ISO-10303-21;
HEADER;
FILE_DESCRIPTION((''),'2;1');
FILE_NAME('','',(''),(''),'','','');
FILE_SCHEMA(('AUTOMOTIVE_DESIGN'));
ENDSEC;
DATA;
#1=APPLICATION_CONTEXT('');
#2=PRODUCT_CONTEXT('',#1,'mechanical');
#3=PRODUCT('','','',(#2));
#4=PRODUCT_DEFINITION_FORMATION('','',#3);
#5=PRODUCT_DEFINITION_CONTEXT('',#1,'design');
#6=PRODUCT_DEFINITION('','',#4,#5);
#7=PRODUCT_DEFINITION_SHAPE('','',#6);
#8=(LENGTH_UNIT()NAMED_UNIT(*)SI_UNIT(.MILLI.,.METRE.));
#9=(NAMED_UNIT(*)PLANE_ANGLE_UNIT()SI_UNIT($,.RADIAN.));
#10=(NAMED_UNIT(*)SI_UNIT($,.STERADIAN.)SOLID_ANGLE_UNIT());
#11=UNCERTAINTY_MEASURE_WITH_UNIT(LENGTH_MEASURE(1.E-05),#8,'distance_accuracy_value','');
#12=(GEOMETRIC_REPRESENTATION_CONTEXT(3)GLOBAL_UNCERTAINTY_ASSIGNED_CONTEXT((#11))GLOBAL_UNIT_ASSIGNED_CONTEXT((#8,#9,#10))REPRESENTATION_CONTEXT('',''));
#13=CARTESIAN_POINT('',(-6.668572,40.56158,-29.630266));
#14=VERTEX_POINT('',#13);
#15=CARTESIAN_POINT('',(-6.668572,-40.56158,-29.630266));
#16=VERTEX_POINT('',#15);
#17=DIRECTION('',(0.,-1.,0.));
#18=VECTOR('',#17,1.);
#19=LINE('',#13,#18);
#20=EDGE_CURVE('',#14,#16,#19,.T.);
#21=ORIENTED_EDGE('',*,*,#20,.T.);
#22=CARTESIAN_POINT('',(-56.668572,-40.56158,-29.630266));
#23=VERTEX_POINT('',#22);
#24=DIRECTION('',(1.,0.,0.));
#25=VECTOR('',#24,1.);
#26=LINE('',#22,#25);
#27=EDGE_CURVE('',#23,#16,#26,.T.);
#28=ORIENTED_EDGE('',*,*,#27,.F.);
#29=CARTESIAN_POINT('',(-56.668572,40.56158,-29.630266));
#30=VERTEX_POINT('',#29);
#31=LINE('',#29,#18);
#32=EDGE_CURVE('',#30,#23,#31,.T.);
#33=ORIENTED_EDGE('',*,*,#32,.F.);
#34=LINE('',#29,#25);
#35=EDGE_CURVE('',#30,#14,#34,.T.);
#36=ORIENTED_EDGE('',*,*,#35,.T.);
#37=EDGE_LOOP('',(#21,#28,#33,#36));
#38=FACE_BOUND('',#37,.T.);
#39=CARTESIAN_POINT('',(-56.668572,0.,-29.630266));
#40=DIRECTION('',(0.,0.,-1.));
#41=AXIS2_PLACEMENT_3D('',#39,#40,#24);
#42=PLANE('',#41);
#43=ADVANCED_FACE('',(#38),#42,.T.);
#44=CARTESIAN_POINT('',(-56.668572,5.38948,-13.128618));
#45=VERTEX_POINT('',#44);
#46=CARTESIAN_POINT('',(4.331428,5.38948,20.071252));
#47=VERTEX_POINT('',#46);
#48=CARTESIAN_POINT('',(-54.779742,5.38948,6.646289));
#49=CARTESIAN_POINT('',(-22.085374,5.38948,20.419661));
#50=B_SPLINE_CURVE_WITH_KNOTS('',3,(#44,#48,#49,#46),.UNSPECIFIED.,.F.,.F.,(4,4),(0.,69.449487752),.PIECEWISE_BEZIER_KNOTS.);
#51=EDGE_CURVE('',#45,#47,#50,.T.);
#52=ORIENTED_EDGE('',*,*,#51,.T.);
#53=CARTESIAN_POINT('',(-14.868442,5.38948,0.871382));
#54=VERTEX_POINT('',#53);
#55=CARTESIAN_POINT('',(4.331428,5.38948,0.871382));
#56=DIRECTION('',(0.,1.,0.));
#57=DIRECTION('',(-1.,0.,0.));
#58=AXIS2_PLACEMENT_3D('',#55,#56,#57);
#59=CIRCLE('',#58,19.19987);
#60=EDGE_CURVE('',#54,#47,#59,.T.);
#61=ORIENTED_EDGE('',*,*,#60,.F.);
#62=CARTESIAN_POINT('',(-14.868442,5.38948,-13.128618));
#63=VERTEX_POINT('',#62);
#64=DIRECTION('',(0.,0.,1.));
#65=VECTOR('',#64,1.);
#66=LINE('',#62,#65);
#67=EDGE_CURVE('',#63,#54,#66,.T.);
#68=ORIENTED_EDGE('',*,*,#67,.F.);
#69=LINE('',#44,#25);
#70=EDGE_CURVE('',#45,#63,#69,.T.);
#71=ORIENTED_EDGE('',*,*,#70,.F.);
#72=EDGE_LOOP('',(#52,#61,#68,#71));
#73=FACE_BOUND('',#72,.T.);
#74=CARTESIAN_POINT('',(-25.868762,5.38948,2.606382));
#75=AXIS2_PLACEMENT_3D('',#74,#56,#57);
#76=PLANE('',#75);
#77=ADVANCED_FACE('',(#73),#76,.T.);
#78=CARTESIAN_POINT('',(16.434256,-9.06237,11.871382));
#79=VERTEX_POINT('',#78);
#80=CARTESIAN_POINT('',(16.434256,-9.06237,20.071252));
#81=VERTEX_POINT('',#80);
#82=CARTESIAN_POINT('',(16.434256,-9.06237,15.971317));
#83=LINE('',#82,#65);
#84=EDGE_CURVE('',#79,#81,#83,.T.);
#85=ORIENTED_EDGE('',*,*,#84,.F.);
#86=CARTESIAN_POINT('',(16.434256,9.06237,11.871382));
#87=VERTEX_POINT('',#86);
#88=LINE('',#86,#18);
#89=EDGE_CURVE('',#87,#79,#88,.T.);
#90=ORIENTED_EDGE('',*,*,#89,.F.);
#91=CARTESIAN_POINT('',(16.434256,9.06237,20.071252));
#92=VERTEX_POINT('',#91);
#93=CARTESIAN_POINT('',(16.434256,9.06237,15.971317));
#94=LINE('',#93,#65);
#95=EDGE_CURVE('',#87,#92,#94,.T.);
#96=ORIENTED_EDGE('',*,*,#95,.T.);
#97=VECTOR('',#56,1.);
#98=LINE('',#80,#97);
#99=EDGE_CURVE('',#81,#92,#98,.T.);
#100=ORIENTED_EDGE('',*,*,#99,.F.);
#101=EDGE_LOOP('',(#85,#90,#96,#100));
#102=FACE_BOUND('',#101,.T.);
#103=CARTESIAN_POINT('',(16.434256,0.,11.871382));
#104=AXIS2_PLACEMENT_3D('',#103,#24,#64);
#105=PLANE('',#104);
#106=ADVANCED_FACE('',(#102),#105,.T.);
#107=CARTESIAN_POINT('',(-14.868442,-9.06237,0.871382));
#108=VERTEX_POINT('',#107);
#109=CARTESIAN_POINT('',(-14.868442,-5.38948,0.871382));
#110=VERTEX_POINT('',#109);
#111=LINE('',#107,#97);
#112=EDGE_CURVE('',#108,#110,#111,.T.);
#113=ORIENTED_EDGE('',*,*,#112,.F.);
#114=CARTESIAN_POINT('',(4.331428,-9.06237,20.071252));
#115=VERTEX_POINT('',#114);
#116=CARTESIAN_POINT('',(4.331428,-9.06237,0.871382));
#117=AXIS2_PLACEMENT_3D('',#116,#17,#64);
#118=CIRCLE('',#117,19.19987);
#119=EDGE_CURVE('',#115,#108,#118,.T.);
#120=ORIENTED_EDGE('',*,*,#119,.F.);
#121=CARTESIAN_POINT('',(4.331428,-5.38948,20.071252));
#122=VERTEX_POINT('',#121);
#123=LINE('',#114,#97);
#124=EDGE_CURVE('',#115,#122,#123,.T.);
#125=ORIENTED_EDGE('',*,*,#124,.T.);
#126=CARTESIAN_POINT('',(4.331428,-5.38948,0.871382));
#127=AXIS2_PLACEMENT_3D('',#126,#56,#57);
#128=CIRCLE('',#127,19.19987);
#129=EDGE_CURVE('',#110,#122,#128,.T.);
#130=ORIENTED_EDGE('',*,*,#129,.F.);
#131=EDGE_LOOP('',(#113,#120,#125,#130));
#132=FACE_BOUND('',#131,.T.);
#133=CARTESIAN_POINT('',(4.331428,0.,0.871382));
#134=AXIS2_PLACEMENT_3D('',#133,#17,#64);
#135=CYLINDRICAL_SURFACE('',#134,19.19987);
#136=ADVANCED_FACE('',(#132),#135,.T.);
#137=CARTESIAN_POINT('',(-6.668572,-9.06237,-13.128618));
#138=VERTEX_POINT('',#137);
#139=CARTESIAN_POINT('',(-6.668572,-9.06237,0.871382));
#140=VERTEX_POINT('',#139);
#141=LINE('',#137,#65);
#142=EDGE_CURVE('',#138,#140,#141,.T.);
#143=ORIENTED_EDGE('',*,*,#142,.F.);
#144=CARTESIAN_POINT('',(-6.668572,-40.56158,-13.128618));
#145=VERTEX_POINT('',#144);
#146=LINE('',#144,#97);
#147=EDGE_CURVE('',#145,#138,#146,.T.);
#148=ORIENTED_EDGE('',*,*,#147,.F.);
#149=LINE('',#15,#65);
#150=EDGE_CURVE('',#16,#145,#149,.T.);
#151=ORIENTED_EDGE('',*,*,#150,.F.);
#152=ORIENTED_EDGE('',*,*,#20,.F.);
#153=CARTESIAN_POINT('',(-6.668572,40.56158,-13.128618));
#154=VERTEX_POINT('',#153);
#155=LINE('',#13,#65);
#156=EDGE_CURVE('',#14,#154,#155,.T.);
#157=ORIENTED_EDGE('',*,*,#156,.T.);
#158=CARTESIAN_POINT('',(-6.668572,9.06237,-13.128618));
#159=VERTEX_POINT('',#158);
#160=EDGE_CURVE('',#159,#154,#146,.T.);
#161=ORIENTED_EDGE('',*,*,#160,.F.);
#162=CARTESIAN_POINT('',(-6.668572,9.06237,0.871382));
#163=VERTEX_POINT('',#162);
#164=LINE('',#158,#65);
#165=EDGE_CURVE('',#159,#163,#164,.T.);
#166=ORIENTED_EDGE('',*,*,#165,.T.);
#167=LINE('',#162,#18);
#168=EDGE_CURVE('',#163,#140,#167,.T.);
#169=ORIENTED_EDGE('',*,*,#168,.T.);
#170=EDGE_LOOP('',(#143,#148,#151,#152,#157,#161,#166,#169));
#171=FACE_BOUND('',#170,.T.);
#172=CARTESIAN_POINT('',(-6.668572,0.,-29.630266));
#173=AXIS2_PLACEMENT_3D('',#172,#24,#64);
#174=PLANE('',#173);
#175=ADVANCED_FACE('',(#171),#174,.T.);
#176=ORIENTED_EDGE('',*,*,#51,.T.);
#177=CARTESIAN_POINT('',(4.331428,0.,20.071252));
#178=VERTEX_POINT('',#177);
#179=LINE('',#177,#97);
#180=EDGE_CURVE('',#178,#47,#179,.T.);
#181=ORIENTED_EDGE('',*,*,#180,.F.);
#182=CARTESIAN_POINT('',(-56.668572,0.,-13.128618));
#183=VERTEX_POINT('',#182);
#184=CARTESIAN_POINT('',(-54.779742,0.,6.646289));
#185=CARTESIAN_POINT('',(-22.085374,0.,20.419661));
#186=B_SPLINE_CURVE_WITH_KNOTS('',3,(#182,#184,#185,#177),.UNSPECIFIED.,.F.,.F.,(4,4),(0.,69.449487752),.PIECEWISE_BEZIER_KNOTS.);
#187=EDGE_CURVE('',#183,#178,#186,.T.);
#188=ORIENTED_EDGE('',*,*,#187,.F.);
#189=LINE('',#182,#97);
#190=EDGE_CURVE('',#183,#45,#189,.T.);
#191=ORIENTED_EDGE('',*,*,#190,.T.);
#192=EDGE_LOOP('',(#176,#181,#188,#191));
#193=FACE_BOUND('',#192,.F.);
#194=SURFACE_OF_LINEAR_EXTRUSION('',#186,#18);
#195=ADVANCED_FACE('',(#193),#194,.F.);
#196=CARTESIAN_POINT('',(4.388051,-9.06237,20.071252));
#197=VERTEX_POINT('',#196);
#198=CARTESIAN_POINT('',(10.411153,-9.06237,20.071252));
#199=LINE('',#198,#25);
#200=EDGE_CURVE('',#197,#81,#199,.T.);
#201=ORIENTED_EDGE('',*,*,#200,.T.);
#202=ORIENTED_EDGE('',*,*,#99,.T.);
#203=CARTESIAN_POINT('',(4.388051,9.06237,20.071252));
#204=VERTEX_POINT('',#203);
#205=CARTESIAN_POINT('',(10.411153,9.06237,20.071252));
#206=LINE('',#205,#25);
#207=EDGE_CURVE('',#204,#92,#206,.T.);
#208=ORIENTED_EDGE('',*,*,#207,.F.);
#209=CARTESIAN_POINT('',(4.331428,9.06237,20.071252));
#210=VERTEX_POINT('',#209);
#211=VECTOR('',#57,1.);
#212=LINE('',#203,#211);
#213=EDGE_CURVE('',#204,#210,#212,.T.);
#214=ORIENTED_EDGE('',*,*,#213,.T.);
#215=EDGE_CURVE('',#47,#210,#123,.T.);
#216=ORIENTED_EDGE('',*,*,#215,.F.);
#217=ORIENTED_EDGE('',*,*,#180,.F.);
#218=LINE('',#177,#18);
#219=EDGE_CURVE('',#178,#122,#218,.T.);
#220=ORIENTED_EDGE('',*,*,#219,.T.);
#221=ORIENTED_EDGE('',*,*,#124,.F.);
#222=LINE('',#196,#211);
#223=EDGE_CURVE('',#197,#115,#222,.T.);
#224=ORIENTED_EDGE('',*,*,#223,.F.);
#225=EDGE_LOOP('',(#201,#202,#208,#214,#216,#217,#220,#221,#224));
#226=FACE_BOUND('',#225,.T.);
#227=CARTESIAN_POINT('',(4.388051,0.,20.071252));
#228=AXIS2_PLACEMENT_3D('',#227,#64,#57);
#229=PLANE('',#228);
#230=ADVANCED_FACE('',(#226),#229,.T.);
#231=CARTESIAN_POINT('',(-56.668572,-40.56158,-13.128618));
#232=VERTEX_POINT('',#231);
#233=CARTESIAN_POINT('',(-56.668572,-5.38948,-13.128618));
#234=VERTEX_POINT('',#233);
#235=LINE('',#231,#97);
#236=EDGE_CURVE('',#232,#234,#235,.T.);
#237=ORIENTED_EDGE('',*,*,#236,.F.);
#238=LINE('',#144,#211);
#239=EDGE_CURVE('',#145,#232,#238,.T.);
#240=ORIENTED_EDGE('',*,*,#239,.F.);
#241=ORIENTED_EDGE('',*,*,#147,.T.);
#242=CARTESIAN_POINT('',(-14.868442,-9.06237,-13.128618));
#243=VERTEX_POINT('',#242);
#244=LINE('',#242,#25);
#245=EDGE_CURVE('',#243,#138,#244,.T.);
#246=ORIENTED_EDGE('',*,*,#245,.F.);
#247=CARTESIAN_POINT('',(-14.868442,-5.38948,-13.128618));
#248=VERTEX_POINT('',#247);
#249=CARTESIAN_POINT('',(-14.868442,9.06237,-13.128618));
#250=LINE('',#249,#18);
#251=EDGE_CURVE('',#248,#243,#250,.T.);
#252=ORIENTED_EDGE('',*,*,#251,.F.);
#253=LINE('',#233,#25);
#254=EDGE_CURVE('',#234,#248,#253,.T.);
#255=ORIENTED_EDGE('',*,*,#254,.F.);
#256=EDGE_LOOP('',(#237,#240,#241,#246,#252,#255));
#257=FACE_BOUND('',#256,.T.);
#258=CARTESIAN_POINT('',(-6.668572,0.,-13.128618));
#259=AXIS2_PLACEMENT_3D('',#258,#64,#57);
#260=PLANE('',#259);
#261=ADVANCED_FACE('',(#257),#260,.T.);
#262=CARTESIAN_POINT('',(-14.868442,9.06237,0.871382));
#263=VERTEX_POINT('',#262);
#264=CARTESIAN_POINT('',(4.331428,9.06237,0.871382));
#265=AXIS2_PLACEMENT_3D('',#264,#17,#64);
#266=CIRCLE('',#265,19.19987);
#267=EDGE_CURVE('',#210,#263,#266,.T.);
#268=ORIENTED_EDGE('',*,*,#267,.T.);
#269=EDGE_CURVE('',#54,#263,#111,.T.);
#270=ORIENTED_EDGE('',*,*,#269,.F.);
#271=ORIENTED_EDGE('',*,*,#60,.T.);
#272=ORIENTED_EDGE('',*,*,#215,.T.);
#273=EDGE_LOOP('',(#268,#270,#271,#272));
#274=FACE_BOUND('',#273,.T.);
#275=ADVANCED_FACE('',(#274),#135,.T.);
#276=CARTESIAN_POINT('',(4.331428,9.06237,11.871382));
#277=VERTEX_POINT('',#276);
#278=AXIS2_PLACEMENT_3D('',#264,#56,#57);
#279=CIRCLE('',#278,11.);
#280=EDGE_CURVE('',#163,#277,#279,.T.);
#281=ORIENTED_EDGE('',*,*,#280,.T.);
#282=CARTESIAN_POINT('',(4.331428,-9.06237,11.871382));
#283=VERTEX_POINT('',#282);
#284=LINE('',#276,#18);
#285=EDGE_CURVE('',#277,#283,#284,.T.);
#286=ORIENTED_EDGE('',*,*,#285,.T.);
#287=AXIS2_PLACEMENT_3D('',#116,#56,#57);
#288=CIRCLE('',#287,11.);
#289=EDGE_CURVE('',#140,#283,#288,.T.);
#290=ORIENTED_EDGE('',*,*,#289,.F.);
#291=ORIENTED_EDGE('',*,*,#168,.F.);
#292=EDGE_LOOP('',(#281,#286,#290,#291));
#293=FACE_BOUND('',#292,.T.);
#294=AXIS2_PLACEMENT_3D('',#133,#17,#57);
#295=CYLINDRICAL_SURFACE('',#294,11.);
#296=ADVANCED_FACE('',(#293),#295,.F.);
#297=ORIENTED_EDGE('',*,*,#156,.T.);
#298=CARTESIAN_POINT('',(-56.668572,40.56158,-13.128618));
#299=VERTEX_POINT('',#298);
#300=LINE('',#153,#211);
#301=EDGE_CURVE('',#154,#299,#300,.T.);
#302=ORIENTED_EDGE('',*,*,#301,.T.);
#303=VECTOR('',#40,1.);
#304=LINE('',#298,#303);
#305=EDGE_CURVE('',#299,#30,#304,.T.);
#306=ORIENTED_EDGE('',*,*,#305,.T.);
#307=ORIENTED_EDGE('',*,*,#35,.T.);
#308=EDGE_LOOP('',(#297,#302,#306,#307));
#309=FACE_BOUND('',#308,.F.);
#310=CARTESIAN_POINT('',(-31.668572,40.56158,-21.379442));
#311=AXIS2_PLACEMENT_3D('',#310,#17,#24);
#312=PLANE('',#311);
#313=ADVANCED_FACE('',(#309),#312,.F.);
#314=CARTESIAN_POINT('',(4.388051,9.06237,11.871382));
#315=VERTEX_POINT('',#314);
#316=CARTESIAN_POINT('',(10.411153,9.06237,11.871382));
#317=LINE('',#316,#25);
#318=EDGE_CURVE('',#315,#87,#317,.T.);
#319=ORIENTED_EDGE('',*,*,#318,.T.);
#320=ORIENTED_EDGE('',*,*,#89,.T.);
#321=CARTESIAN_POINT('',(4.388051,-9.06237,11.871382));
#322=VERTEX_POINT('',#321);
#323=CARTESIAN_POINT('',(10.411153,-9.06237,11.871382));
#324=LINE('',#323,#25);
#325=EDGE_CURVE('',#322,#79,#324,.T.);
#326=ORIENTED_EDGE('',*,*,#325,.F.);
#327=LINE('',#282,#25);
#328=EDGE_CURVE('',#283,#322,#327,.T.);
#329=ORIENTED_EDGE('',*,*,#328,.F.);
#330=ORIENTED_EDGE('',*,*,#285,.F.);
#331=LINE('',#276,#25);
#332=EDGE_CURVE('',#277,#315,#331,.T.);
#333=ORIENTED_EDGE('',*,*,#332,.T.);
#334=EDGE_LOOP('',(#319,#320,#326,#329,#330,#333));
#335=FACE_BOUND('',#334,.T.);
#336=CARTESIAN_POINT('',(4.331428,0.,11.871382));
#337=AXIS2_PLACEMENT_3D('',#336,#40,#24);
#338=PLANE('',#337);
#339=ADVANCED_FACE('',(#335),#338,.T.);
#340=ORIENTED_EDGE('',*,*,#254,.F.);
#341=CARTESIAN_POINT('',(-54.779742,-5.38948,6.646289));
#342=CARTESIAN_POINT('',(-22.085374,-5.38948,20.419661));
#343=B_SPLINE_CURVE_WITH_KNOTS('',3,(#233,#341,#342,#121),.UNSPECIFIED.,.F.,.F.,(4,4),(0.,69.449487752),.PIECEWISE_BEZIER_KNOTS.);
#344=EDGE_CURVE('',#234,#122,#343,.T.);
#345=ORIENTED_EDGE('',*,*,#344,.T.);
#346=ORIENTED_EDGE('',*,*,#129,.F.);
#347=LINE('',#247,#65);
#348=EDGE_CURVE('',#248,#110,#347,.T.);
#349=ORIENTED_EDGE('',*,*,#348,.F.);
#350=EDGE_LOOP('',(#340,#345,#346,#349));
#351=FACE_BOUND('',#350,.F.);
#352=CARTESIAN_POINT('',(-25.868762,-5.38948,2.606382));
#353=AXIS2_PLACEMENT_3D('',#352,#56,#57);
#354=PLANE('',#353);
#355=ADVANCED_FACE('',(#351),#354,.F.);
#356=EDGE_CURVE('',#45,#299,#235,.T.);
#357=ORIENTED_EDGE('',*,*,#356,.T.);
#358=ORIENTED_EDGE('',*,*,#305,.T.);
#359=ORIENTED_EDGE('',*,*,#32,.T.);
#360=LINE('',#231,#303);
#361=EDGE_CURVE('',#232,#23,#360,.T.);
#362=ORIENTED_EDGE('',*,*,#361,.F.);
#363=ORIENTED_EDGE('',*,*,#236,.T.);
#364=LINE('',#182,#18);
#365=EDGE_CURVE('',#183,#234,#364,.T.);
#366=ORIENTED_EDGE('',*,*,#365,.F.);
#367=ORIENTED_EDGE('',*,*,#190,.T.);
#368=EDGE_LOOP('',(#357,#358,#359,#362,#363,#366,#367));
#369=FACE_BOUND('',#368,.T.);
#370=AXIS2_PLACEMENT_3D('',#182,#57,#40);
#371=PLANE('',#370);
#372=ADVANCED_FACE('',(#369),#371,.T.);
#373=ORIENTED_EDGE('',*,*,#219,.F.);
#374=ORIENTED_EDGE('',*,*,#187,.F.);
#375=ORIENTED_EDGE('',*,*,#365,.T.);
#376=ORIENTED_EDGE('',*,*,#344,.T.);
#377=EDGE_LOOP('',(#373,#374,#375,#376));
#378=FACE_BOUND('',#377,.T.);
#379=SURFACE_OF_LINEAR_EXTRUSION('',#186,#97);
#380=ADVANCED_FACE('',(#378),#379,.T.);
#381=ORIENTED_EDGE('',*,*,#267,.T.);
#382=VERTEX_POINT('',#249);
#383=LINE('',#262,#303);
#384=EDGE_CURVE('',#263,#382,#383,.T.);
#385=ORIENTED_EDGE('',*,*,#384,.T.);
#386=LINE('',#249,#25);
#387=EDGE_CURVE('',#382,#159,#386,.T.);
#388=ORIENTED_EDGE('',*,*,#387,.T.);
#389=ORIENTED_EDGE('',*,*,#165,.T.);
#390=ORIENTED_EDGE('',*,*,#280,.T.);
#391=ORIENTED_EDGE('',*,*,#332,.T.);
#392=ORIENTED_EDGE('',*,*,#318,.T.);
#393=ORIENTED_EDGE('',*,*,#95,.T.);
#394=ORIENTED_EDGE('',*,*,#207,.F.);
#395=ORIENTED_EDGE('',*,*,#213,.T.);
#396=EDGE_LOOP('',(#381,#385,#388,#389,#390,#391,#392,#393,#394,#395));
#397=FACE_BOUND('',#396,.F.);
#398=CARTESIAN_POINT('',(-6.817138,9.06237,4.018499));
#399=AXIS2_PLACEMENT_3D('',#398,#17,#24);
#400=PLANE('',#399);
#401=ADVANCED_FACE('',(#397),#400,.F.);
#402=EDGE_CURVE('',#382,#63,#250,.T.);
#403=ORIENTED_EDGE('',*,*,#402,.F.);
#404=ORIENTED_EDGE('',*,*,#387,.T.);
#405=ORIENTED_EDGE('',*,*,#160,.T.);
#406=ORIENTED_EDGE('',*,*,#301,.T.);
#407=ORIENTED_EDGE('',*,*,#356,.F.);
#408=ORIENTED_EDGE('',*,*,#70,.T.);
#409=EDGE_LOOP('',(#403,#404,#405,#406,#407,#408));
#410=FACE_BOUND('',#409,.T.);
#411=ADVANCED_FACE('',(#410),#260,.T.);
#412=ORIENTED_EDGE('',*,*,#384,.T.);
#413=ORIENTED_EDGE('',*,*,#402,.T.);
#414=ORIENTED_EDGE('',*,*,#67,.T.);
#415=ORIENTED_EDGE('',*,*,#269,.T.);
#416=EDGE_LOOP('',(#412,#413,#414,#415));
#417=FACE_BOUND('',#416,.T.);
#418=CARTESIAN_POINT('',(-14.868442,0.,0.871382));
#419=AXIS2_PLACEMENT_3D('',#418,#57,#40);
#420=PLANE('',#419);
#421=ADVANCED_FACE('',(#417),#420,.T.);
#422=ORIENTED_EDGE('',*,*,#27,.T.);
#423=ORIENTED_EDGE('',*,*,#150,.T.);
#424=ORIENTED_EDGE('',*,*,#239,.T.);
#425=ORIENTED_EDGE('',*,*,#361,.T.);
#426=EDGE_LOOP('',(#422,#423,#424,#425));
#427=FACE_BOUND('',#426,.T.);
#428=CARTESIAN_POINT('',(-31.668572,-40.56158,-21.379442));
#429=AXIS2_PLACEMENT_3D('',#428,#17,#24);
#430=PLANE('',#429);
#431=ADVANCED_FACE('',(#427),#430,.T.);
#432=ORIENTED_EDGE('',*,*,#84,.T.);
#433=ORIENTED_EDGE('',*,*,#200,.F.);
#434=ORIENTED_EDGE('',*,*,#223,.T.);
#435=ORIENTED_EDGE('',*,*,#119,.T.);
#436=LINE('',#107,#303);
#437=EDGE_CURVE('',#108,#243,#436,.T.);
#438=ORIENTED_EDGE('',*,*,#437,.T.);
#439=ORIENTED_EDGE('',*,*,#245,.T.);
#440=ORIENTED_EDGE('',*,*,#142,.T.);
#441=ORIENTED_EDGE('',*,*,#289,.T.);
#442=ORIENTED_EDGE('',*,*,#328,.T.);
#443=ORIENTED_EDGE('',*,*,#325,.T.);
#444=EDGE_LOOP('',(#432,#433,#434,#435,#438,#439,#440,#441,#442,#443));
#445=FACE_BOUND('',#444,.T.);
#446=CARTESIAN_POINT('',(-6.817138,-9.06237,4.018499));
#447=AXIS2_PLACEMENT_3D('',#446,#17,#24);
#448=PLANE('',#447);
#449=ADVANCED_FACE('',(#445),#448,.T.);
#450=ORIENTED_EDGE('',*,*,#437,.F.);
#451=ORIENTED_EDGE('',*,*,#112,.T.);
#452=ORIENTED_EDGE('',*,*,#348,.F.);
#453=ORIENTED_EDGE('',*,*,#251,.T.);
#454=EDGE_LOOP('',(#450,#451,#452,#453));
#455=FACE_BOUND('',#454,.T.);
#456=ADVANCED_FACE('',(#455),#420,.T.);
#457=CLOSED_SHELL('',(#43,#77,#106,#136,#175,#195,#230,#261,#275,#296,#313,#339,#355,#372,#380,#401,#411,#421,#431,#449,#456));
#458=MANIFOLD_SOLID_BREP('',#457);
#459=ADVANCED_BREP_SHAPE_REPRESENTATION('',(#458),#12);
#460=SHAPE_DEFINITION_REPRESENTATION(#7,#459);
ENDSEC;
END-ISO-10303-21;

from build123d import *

# Parameters (mm, degrees)
F1_DEPTH = 40.56158
F2_DEPTH = 5.38948
F0_W     = 12.0462047143
F0_H     = 8.1998697145
F3_DEPTH = 9.06237


with BuildPart() as f1:
    # F0 (on Front) → F1 (new body, symmetric)
    with BuildSketch(Plane.XZ):
        Polygon((-14.8684419692, -13.1286175627), (-56.6685722546, -13.1286175627), (-56.6685722546, -29.630266222), (-6.6685722546, -29.630266222), (-6.6685722546, -13.1286175627), align=None)
    extrude(amount=F1_DEPTH, both=True)

    # F0 (on Front) → F2 (join, symmetric)
    with BuildSketch(Plane.XZ):
        with BuildLine():
            add(Edge.make_bspline(
                [(-56.6685722546, -13.1286175627), (-54.7797419131, 6.6462885588), (-22.0853742212, 20.4196609557), (4.3314277454, 20.0712521518)],
                knots=[0, 0, 0, 0, 69.4494877523, 69.4494877523, 69.4494877523, 69.4494877523], degree=3))
            Line((-56.6685722546, -13.1286175627), (-14.8684419692, -13.1286175627))
            Line((-14.8684419692, -13.1286175627), (-14.8684419692, 0.8713824373))
            ThreePointArc((-14.8684419692, 0.8713824373), (-9.2449303277, 14.4477405103), (4.3314277454, 20.0712521518))
        make_face()
    extrude(amount=F2_DEPTH, both=True)

    # F0 (on Front) → F3 (join, symmetric)
    with BuildSketch(Plane.XZ):
        with BuildLine():
            Line((-14.8684419692, 0.8713824373), (-14.8684419692, -13.1286175627))
            Line((-14.8684419692, -13.1286175627), (-6.6685722546, -13.1286175627))
            Line((-6.6685722546, -13.1286175627), (-6.6685722546, 0.8713824373))
            ThreePointArc((-6.6685722546, 0.8713824373), (-3.4467468477, 8.6495570304), (4.3314277454, 11.8713824373))
            Line((4.3314277454, 11.8713824373), (4.3880510932, 11.8713824373))
            Line((4.3880510932, 11.8713824373), (4.3880510932, 20.0712521518))
            Line((4.3880510932, 20.0712521518), (4.3314277454, 20.0712521518))
            ThreePointArc((4.3314277454, 20.0712521518), (-9.2449303277, 14.4477405103), (-14.8684419692, 0.8713824373))
        make_face()
        with Locations((10.4111534504, 15.9713172946)):
            Rectangle(F0_W, F0_H)
    extrude(amount=F3_DEPTH, both=True)


solid = f1.part
